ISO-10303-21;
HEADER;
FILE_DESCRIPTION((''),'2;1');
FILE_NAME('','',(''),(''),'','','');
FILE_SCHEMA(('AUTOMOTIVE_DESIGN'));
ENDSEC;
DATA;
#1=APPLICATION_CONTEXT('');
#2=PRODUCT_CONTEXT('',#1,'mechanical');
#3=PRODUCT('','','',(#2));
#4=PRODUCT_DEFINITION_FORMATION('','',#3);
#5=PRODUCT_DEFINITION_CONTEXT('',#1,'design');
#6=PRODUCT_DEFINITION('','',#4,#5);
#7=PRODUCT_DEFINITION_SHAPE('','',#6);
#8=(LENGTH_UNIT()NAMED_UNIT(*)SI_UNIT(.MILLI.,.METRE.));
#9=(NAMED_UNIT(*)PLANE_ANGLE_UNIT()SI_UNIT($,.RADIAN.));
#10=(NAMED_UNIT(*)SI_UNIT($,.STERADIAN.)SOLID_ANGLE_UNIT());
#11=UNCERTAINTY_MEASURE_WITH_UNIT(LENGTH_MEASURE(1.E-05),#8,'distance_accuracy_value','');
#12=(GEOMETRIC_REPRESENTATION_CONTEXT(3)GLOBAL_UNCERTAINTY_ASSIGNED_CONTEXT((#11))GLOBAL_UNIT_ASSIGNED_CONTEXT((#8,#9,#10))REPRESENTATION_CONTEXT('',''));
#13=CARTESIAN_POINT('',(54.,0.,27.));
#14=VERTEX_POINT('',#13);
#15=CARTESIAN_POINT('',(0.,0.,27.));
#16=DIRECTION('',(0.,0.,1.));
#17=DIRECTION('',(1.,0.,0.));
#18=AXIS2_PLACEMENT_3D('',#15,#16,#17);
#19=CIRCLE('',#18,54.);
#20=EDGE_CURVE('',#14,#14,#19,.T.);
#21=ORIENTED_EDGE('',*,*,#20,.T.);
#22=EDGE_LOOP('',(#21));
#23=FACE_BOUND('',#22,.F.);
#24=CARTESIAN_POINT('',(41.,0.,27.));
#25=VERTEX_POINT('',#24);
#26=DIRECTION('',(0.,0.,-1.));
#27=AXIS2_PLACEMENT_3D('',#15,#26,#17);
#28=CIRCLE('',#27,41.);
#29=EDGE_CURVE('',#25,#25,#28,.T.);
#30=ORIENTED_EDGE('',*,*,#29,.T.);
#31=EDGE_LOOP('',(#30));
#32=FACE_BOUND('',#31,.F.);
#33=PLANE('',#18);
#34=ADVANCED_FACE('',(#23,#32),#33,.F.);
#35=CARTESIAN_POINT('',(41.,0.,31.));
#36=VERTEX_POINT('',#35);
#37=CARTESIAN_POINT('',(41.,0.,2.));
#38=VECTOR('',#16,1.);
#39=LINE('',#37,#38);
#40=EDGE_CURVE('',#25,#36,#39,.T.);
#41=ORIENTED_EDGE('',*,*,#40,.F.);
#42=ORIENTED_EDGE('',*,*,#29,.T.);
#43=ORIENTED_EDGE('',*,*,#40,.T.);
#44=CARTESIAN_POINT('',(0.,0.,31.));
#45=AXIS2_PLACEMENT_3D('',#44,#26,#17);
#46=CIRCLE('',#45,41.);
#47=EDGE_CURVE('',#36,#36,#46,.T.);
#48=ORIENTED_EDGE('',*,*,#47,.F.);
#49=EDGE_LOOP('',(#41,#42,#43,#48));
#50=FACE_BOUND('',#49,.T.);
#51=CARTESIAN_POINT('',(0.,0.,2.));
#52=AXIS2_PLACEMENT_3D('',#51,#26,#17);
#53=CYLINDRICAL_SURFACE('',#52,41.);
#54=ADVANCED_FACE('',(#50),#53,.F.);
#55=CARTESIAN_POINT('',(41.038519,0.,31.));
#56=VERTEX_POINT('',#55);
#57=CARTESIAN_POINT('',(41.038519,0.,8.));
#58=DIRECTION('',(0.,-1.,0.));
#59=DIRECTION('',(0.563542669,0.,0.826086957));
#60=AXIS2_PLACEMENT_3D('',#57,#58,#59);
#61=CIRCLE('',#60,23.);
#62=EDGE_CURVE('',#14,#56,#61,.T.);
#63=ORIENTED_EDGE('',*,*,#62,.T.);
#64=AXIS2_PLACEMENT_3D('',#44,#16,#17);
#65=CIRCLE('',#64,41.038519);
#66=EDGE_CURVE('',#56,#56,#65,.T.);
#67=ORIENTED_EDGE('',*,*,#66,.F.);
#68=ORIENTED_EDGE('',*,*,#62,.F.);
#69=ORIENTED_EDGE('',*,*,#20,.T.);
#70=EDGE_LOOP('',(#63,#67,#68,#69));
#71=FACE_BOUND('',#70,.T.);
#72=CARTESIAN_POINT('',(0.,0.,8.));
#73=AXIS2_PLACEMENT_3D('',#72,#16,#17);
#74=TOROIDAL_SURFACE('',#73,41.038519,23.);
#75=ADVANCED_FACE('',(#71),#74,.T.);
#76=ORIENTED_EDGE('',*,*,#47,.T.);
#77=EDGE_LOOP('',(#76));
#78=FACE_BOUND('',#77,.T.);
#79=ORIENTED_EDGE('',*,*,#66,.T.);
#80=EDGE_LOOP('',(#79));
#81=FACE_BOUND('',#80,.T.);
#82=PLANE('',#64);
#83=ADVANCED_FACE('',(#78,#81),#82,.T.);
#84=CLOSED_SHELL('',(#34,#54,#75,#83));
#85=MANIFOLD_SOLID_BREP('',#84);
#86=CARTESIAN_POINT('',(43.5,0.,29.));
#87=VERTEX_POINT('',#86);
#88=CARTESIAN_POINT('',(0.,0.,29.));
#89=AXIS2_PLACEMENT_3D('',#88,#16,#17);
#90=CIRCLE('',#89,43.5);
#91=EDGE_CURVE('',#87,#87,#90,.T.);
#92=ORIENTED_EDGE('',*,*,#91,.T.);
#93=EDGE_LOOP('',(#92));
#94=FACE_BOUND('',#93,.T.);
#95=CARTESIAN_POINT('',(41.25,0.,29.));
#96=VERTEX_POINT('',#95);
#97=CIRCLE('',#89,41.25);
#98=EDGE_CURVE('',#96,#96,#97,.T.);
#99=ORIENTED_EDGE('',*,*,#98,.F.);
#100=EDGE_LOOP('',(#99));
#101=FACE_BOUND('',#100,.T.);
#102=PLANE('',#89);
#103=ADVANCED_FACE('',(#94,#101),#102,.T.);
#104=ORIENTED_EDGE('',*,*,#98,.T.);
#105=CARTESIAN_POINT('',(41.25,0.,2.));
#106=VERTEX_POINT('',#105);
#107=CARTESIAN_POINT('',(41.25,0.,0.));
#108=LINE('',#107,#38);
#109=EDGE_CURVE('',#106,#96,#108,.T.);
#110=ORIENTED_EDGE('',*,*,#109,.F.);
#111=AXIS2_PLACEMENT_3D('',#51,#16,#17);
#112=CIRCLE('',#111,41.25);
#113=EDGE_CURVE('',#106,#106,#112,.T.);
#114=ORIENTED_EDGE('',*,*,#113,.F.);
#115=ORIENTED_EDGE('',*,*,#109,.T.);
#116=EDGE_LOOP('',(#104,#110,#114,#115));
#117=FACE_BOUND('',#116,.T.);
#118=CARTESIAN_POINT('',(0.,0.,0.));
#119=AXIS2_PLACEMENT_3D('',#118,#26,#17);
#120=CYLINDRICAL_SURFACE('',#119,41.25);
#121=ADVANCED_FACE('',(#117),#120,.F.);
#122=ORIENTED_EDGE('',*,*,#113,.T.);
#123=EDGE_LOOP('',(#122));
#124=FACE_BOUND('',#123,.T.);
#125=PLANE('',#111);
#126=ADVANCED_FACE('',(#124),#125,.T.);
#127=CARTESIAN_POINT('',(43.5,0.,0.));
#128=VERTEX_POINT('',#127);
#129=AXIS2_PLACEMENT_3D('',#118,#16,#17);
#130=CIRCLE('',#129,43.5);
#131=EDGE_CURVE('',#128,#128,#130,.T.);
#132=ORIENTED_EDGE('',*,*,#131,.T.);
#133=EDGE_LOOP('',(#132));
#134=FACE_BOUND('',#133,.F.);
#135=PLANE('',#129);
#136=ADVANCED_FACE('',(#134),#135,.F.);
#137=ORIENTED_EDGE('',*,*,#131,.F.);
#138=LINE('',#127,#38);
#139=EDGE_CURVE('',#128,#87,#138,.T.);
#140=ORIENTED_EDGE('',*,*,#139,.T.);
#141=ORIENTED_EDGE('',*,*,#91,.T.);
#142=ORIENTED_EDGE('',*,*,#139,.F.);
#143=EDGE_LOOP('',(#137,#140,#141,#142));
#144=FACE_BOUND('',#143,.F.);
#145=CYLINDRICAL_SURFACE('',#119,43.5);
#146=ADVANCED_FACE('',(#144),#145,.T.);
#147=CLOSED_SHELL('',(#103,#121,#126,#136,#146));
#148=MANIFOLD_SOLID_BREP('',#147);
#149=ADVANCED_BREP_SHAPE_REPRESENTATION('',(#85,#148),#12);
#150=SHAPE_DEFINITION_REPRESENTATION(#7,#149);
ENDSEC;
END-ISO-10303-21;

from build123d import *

# Parameters (mm, degrees)
F0_R     = 43.5
F0_R_2   = 41.25
F1_DEPTH = 29
F2_DEPTH = 2
F3_R     = 54
F4_DEPTH = 2
F5_R     = 41
F6_DEPTH = 29.001


# Not quite as in the source:
# - a fillet or chamfer that OpenCascade refuses, or shapes differently, is made with other operations: its cross-section is extruded or revolved along the edge and cut away or added


with BuildPart() as f1:
    # F0 (on Top) → F1 (new body)
    with BuildSketch(Plane.XY):
        Circle(F0_R)
        Circle(F0_R_2, mode=Mode.SUBTRACT)
    extrude(amount=F1_DEPTH)

    # F0 (on Top) → F2 (join)
    with BuildSketch(Plane.XY):
        Circle(F0_R_2)
    extrude(amount=F2_DEPTH)


with BuildPart() as f4:
    # F3 (on face) → F4 (new body, symmetric)
    with BuildSketch(Plane.XY.offset(29)):
        Circle(F3_R)
    extrude(amount=F4_DEPTH, both=True)

    # F5 (on face) → F6 (cut, through all)
    with BuildSketch(Plane.XY.offset(2)):
        Circle(F5_R)
    extrude(amount=F6_DEPTH, mode=Mode.SUBTRACT)

    # F7: fillet of radius 23 on 1 edges, made by hand

    # F7_s1 → F7_t2 (revolve, cut)
    with BuildSketch(Plane.XZ):
        with BuildLine():
            ThreePointArc((54, 27), (47.8208485863, 29.9772609758), (41.0385186032, 31))
            Line((41.0385186032, 31), (41.0385186032, 31.46))
            Line((41.0385186032, 31.46), (54, 31.46))
            Line((54, 31.46), (54.46, 31))
            ThreePointArc((54.46, 31), (54.46, 29), (54.2592296279, 27.38))
            Line((54.2592296279, 27.38), (54, 27))
        make_face()
    revolve(axis=Axis((0, 0, 31), (0, 0, 1)), mode=Mode.SUBTRACT)


solid = Compound([f1.part, f4.part])
